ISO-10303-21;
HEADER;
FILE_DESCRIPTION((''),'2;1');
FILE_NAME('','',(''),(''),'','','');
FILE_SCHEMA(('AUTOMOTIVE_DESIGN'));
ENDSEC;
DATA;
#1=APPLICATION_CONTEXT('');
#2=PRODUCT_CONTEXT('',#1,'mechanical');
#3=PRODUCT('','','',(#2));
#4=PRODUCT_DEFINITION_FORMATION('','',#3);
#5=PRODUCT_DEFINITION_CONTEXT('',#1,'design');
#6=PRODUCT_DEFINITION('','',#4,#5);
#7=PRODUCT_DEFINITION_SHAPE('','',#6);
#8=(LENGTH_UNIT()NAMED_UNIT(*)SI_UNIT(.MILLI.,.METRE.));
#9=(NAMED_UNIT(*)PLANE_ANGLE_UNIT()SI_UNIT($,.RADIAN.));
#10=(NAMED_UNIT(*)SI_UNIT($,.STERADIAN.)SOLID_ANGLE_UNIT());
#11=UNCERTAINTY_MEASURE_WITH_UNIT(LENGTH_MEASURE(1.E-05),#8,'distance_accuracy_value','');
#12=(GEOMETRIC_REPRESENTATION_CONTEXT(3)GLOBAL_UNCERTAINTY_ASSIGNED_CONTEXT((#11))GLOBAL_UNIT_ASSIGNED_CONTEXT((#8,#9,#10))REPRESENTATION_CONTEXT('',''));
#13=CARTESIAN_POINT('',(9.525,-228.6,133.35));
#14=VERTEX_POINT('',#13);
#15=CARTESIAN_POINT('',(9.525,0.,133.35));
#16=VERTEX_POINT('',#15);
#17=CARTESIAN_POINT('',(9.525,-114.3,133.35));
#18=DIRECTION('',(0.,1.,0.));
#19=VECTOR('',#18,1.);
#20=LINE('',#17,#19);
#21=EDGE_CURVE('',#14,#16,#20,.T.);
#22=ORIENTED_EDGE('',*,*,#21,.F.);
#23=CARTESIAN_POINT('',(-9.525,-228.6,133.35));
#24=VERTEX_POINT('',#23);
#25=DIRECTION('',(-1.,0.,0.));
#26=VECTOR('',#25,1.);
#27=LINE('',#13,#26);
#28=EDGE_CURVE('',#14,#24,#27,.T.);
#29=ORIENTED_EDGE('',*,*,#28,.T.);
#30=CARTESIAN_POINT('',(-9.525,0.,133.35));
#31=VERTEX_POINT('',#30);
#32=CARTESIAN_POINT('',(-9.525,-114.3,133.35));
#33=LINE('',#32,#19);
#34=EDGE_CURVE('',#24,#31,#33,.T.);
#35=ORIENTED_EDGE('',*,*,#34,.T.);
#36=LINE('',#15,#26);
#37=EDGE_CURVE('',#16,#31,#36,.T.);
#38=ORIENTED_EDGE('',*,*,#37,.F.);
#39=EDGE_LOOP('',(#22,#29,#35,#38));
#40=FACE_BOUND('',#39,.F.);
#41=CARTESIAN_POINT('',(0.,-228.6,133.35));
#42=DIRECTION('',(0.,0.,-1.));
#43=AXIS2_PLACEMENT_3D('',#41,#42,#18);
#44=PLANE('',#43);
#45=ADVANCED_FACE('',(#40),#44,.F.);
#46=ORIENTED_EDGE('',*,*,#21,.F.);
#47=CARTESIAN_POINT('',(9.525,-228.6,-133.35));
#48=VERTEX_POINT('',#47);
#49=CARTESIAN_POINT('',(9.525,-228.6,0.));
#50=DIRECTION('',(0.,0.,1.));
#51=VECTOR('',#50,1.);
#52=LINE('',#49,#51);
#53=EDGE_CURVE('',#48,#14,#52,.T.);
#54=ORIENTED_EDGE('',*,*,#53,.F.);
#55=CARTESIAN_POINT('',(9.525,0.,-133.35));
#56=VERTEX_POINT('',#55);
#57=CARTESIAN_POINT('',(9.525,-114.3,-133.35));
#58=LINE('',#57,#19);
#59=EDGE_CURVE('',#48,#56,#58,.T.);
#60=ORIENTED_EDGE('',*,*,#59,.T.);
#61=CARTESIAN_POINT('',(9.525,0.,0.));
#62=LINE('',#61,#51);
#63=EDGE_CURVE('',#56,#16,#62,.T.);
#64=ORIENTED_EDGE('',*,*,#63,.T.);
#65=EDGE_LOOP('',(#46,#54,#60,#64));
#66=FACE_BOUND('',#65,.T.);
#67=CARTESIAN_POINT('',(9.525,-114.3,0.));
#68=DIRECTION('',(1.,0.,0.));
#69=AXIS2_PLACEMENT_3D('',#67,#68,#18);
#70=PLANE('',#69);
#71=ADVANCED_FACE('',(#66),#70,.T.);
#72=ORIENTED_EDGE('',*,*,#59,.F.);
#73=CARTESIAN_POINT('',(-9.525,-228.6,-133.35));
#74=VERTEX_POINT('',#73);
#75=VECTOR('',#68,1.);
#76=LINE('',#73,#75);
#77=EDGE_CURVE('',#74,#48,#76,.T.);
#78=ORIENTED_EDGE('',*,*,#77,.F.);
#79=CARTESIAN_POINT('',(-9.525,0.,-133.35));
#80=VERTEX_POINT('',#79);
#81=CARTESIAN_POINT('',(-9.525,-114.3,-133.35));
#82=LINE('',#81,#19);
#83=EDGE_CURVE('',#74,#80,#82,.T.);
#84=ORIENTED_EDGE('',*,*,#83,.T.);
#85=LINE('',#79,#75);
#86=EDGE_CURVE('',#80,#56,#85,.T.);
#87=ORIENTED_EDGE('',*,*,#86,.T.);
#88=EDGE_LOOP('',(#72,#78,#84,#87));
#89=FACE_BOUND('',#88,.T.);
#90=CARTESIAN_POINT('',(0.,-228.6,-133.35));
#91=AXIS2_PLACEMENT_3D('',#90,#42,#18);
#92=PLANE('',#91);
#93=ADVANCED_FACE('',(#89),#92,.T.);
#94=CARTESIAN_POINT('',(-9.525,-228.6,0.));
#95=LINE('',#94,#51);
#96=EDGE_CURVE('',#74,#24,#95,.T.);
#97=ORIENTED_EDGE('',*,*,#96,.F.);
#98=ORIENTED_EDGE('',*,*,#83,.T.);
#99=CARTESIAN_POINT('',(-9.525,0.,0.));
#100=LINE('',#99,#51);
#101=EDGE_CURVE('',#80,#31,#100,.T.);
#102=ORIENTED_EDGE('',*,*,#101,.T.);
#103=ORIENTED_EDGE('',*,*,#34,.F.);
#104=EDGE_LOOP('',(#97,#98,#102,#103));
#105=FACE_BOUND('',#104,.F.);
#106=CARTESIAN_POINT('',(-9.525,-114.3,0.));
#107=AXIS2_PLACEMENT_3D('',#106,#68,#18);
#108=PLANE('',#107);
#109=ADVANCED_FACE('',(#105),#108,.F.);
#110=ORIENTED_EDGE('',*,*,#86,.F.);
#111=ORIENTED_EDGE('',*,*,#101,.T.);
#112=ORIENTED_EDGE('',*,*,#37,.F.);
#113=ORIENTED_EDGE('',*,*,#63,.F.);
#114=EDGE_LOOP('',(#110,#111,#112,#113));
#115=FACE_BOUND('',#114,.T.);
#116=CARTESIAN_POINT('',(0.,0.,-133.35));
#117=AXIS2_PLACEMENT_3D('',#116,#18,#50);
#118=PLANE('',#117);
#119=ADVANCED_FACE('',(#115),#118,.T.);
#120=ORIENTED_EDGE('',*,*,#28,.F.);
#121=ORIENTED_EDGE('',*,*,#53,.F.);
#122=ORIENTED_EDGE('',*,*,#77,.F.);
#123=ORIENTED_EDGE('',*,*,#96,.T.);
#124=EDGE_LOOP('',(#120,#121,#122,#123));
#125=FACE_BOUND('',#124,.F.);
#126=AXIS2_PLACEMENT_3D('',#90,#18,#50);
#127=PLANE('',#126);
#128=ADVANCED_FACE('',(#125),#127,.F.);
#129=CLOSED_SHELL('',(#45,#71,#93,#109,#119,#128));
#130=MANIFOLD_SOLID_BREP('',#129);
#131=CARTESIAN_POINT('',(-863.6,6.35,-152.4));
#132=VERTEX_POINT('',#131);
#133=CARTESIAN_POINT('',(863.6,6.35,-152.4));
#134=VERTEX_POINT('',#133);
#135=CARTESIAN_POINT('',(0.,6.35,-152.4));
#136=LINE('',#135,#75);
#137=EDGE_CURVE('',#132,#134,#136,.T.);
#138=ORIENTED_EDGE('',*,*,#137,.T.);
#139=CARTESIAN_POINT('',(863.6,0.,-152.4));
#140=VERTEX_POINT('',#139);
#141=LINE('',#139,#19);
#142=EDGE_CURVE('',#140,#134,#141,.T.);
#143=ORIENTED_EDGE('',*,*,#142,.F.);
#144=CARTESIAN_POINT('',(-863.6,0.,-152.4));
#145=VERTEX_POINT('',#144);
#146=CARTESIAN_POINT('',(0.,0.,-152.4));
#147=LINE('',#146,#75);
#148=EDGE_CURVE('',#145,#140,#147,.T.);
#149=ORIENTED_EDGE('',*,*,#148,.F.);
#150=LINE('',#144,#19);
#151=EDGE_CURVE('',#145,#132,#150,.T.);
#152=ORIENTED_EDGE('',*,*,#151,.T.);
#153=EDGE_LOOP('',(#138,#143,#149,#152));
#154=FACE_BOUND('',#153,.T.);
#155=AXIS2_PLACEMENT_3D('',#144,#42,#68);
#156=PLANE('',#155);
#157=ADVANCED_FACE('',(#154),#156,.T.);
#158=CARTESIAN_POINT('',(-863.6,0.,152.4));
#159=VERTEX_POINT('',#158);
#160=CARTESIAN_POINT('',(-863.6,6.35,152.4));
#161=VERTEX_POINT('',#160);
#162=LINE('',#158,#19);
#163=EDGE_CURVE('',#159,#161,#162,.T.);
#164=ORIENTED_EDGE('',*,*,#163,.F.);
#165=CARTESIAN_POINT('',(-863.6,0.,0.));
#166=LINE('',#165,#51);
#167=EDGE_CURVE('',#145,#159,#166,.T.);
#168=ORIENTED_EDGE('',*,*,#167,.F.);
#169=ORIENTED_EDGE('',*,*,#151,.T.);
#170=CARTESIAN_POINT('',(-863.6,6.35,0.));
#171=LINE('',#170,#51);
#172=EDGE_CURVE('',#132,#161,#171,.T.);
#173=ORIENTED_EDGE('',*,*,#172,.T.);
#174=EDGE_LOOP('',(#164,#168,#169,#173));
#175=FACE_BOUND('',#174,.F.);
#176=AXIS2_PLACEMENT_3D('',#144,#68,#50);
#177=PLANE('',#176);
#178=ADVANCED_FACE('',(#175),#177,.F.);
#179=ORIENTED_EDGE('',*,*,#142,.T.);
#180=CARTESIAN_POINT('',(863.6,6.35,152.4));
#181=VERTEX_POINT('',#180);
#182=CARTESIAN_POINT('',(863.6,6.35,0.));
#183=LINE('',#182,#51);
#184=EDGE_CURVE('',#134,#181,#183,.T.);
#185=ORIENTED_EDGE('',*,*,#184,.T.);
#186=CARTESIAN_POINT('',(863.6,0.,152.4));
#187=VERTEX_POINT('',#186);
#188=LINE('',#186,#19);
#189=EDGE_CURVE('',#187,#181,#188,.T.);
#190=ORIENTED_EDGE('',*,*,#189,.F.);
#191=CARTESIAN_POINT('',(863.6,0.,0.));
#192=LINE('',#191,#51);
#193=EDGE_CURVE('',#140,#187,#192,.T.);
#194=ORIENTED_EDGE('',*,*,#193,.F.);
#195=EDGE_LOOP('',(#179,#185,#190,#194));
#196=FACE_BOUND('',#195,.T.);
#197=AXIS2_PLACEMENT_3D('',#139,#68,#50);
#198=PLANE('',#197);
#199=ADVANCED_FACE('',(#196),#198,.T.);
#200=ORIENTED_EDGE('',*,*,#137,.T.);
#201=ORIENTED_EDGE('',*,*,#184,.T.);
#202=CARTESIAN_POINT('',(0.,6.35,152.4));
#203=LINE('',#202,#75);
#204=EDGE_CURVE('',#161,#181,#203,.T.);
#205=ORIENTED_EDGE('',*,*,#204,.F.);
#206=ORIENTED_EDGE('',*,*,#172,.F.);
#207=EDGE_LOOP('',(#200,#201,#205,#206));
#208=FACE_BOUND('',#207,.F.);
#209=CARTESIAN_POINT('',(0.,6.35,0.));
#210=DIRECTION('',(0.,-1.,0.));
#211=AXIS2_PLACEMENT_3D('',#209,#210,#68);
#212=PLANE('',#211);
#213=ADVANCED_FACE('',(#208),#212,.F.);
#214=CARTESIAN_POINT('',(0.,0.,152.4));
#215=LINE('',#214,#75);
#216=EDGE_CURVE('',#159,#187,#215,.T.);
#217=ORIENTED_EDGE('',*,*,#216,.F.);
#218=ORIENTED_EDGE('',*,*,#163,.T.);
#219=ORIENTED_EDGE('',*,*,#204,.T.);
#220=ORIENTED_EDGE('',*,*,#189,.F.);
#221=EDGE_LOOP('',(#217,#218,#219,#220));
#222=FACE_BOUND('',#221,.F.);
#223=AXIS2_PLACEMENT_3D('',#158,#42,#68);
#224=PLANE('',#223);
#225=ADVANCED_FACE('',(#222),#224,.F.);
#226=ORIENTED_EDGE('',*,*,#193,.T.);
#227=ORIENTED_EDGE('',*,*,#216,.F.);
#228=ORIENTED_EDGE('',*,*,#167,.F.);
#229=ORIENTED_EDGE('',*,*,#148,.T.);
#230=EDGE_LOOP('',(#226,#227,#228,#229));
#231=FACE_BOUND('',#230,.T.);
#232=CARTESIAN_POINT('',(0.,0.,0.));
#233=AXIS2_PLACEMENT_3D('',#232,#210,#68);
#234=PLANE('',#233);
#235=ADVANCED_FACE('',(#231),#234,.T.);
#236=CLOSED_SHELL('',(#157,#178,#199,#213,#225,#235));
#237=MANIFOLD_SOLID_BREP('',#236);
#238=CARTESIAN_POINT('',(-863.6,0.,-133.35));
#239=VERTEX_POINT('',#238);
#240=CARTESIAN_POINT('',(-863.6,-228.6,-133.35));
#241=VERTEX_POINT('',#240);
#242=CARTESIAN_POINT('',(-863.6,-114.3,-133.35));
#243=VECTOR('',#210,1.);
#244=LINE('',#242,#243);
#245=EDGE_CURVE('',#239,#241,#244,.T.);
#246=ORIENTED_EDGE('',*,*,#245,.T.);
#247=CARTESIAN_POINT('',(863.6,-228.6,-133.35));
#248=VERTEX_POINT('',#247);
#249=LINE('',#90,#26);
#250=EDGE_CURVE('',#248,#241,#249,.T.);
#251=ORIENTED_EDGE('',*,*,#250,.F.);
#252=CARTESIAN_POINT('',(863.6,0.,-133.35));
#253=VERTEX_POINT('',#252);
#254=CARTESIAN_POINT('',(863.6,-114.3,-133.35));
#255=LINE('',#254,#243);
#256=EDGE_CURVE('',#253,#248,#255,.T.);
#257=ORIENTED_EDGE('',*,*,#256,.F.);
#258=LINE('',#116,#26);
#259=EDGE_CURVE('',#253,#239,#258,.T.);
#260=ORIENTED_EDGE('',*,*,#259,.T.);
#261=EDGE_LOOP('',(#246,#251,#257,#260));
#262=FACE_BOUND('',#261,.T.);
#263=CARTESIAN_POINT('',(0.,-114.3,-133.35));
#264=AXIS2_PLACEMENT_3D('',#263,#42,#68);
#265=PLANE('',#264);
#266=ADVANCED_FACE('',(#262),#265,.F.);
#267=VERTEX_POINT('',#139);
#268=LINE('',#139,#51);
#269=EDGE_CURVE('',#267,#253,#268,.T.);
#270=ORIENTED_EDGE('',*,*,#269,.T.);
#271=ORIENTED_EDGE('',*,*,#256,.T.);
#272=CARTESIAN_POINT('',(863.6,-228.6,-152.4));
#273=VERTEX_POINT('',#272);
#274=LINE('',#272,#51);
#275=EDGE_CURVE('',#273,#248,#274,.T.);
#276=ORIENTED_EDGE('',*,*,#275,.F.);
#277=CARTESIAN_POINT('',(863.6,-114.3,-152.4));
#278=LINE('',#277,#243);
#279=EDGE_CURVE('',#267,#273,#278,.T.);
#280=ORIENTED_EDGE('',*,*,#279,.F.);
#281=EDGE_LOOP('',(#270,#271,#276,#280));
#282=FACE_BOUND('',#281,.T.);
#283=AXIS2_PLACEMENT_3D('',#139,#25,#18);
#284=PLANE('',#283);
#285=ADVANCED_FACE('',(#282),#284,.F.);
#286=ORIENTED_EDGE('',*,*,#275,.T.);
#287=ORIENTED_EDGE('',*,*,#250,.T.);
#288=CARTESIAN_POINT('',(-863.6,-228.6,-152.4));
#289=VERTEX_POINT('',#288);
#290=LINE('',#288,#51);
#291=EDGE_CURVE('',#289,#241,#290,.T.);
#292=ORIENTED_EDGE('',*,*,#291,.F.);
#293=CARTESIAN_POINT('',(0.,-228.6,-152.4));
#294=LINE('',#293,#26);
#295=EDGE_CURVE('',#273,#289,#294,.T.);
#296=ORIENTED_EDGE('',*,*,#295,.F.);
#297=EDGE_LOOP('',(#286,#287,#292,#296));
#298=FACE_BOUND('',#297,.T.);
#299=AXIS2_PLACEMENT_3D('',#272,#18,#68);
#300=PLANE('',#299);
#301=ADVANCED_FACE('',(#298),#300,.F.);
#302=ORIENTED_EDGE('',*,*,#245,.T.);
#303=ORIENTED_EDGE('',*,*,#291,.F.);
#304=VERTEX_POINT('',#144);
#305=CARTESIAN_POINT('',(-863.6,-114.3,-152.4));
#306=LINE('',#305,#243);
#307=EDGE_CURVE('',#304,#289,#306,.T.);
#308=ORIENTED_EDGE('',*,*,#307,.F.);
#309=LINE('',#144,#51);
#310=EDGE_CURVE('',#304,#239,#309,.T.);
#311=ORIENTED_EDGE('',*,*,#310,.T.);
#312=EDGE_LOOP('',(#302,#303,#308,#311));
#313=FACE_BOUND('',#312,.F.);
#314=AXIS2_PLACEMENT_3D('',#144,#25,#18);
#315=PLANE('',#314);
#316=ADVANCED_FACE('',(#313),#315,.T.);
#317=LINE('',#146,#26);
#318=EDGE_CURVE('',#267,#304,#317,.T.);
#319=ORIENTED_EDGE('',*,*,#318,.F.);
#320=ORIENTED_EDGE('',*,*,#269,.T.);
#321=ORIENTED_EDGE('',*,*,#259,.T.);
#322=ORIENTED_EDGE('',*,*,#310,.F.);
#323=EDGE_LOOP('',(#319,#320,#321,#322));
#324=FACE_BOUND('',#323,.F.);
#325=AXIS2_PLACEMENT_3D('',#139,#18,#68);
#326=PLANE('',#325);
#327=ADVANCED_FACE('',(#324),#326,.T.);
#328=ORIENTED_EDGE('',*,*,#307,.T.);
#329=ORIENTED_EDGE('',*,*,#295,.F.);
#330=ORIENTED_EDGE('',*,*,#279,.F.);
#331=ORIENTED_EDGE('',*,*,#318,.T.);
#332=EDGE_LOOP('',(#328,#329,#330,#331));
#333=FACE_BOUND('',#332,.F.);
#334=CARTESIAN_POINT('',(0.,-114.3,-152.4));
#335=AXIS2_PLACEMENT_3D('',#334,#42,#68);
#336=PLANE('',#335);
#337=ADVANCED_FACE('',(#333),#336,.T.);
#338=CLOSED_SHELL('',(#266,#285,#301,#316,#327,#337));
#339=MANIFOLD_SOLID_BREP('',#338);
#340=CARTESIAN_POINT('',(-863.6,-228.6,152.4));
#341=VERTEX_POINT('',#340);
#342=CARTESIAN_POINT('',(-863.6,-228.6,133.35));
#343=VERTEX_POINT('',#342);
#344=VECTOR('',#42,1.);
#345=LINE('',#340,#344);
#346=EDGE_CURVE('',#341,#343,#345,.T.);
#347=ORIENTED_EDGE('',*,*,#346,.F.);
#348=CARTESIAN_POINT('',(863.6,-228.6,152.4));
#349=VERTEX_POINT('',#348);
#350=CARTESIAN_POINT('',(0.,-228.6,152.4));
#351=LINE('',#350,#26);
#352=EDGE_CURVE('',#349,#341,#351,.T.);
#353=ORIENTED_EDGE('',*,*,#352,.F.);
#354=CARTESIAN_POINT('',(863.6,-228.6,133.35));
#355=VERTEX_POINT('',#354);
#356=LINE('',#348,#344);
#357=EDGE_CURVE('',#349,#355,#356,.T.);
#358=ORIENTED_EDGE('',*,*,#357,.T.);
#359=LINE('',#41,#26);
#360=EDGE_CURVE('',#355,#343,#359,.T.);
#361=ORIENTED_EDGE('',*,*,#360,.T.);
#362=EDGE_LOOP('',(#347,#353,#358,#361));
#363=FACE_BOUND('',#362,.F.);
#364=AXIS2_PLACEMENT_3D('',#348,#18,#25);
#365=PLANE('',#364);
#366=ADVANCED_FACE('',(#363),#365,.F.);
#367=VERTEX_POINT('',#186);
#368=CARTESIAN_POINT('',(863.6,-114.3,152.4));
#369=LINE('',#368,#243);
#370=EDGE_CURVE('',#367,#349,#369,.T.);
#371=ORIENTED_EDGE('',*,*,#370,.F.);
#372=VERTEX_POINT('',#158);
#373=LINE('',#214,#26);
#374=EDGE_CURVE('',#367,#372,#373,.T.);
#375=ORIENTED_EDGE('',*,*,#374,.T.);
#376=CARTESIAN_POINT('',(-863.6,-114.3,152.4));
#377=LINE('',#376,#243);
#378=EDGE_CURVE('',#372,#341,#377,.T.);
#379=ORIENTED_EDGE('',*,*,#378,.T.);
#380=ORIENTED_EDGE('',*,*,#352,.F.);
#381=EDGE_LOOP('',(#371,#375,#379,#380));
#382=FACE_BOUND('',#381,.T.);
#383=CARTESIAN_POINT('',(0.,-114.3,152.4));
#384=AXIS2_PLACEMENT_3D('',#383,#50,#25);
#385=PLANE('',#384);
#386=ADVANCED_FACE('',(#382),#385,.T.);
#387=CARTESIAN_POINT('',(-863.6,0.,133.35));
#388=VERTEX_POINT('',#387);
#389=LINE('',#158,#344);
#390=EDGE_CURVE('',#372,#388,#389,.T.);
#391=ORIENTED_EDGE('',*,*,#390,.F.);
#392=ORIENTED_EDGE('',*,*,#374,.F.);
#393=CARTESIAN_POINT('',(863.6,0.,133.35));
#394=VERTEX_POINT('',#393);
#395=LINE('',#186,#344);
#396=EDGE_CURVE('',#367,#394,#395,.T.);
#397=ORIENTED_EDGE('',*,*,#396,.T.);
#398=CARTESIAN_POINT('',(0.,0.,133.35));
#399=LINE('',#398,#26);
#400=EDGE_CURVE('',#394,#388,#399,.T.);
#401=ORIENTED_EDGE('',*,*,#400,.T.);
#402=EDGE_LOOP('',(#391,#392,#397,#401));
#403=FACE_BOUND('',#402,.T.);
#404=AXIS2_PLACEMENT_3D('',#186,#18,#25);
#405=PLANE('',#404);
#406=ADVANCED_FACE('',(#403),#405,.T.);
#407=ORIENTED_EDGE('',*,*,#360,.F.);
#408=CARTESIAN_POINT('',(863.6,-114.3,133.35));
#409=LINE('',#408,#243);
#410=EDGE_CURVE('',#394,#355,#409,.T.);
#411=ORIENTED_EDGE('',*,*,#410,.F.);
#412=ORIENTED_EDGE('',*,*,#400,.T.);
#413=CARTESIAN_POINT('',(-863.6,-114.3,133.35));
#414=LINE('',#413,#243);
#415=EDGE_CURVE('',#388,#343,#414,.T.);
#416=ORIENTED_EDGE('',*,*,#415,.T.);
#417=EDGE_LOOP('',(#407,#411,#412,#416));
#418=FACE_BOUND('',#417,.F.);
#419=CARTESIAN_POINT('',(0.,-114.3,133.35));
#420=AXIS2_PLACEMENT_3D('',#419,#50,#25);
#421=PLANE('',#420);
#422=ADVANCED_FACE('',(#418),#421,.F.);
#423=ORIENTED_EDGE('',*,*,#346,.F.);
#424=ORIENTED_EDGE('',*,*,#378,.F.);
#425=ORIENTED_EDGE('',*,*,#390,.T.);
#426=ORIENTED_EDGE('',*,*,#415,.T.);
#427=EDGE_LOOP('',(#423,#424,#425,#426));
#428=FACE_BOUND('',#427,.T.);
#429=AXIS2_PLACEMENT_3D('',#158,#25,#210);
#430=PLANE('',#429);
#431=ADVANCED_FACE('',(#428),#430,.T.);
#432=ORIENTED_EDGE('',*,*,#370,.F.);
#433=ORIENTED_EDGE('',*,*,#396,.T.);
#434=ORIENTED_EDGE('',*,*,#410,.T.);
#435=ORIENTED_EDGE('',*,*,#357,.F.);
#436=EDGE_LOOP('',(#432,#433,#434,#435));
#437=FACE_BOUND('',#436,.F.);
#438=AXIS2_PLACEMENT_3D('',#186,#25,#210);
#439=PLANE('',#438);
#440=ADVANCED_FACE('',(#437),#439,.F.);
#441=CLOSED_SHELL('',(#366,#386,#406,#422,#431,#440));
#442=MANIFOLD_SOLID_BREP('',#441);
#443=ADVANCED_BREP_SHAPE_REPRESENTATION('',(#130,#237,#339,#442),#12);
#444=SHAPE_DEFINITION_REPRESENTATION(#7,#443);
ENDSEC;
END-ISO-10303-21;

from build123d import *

# Parameters (mm, degrees)
F0_W          = 1727.2
F0_H          = 304.8
F1_DEPTH      = 6.35
F3_E1_0_W     = 1727.2
F3_E1_0_H     = 228.6
F4_DEPTH      = 19.05
F6_W          = 228.6
F6_H          = 266.7
F7_DEPTH      = 9.525
F7_DEPTH_BACK = 9.525


# Not quite as in the source:
# - a feature names something its author has since deleted; it is built from what else it names


with BuildPart() as f1:
    # F0 (on Front) → F1 (new body)
    with BuildSketch(Plane.XZ):
        Rectangle(F0_W, F0_H)
    extrude(amount=-F1_DEPTH)


with BuildPart() as f4:
    # F3_E1_0 (on explicit) → F4 (new body)
    with BuildSketch(Plane(origin=(863.6, 0, 152.4), x_dir=(-1, 0, 0), z_dir=(0, 0, 1))):
        with Locations((863.6, 114.3)):
            Rectangle(F3_E1_0_W, F3_E1_0_H)
    extrude(amount=-F4_DEPTH)


with BuildPart() as f5_1:
    # F5: instance of F4
    add(f4.part.mirror(Plane.XY))


with BuildPart() as f7:
    # F6 (on Right) → F7 (new body, two sides)
    with BuildSketch(Plane.YZ) as f7_sk:
        with Locations((-114.3, 0)):
            Rectangle(F6_W, F6_H)
    extrude(amount=F7_DEPTH)
    extrude(f7_sk.sketch, amount=-F7_DEPTH_BACK)


solid = Compound([f1.part, f4.part, f5_1.part, f7.part])
